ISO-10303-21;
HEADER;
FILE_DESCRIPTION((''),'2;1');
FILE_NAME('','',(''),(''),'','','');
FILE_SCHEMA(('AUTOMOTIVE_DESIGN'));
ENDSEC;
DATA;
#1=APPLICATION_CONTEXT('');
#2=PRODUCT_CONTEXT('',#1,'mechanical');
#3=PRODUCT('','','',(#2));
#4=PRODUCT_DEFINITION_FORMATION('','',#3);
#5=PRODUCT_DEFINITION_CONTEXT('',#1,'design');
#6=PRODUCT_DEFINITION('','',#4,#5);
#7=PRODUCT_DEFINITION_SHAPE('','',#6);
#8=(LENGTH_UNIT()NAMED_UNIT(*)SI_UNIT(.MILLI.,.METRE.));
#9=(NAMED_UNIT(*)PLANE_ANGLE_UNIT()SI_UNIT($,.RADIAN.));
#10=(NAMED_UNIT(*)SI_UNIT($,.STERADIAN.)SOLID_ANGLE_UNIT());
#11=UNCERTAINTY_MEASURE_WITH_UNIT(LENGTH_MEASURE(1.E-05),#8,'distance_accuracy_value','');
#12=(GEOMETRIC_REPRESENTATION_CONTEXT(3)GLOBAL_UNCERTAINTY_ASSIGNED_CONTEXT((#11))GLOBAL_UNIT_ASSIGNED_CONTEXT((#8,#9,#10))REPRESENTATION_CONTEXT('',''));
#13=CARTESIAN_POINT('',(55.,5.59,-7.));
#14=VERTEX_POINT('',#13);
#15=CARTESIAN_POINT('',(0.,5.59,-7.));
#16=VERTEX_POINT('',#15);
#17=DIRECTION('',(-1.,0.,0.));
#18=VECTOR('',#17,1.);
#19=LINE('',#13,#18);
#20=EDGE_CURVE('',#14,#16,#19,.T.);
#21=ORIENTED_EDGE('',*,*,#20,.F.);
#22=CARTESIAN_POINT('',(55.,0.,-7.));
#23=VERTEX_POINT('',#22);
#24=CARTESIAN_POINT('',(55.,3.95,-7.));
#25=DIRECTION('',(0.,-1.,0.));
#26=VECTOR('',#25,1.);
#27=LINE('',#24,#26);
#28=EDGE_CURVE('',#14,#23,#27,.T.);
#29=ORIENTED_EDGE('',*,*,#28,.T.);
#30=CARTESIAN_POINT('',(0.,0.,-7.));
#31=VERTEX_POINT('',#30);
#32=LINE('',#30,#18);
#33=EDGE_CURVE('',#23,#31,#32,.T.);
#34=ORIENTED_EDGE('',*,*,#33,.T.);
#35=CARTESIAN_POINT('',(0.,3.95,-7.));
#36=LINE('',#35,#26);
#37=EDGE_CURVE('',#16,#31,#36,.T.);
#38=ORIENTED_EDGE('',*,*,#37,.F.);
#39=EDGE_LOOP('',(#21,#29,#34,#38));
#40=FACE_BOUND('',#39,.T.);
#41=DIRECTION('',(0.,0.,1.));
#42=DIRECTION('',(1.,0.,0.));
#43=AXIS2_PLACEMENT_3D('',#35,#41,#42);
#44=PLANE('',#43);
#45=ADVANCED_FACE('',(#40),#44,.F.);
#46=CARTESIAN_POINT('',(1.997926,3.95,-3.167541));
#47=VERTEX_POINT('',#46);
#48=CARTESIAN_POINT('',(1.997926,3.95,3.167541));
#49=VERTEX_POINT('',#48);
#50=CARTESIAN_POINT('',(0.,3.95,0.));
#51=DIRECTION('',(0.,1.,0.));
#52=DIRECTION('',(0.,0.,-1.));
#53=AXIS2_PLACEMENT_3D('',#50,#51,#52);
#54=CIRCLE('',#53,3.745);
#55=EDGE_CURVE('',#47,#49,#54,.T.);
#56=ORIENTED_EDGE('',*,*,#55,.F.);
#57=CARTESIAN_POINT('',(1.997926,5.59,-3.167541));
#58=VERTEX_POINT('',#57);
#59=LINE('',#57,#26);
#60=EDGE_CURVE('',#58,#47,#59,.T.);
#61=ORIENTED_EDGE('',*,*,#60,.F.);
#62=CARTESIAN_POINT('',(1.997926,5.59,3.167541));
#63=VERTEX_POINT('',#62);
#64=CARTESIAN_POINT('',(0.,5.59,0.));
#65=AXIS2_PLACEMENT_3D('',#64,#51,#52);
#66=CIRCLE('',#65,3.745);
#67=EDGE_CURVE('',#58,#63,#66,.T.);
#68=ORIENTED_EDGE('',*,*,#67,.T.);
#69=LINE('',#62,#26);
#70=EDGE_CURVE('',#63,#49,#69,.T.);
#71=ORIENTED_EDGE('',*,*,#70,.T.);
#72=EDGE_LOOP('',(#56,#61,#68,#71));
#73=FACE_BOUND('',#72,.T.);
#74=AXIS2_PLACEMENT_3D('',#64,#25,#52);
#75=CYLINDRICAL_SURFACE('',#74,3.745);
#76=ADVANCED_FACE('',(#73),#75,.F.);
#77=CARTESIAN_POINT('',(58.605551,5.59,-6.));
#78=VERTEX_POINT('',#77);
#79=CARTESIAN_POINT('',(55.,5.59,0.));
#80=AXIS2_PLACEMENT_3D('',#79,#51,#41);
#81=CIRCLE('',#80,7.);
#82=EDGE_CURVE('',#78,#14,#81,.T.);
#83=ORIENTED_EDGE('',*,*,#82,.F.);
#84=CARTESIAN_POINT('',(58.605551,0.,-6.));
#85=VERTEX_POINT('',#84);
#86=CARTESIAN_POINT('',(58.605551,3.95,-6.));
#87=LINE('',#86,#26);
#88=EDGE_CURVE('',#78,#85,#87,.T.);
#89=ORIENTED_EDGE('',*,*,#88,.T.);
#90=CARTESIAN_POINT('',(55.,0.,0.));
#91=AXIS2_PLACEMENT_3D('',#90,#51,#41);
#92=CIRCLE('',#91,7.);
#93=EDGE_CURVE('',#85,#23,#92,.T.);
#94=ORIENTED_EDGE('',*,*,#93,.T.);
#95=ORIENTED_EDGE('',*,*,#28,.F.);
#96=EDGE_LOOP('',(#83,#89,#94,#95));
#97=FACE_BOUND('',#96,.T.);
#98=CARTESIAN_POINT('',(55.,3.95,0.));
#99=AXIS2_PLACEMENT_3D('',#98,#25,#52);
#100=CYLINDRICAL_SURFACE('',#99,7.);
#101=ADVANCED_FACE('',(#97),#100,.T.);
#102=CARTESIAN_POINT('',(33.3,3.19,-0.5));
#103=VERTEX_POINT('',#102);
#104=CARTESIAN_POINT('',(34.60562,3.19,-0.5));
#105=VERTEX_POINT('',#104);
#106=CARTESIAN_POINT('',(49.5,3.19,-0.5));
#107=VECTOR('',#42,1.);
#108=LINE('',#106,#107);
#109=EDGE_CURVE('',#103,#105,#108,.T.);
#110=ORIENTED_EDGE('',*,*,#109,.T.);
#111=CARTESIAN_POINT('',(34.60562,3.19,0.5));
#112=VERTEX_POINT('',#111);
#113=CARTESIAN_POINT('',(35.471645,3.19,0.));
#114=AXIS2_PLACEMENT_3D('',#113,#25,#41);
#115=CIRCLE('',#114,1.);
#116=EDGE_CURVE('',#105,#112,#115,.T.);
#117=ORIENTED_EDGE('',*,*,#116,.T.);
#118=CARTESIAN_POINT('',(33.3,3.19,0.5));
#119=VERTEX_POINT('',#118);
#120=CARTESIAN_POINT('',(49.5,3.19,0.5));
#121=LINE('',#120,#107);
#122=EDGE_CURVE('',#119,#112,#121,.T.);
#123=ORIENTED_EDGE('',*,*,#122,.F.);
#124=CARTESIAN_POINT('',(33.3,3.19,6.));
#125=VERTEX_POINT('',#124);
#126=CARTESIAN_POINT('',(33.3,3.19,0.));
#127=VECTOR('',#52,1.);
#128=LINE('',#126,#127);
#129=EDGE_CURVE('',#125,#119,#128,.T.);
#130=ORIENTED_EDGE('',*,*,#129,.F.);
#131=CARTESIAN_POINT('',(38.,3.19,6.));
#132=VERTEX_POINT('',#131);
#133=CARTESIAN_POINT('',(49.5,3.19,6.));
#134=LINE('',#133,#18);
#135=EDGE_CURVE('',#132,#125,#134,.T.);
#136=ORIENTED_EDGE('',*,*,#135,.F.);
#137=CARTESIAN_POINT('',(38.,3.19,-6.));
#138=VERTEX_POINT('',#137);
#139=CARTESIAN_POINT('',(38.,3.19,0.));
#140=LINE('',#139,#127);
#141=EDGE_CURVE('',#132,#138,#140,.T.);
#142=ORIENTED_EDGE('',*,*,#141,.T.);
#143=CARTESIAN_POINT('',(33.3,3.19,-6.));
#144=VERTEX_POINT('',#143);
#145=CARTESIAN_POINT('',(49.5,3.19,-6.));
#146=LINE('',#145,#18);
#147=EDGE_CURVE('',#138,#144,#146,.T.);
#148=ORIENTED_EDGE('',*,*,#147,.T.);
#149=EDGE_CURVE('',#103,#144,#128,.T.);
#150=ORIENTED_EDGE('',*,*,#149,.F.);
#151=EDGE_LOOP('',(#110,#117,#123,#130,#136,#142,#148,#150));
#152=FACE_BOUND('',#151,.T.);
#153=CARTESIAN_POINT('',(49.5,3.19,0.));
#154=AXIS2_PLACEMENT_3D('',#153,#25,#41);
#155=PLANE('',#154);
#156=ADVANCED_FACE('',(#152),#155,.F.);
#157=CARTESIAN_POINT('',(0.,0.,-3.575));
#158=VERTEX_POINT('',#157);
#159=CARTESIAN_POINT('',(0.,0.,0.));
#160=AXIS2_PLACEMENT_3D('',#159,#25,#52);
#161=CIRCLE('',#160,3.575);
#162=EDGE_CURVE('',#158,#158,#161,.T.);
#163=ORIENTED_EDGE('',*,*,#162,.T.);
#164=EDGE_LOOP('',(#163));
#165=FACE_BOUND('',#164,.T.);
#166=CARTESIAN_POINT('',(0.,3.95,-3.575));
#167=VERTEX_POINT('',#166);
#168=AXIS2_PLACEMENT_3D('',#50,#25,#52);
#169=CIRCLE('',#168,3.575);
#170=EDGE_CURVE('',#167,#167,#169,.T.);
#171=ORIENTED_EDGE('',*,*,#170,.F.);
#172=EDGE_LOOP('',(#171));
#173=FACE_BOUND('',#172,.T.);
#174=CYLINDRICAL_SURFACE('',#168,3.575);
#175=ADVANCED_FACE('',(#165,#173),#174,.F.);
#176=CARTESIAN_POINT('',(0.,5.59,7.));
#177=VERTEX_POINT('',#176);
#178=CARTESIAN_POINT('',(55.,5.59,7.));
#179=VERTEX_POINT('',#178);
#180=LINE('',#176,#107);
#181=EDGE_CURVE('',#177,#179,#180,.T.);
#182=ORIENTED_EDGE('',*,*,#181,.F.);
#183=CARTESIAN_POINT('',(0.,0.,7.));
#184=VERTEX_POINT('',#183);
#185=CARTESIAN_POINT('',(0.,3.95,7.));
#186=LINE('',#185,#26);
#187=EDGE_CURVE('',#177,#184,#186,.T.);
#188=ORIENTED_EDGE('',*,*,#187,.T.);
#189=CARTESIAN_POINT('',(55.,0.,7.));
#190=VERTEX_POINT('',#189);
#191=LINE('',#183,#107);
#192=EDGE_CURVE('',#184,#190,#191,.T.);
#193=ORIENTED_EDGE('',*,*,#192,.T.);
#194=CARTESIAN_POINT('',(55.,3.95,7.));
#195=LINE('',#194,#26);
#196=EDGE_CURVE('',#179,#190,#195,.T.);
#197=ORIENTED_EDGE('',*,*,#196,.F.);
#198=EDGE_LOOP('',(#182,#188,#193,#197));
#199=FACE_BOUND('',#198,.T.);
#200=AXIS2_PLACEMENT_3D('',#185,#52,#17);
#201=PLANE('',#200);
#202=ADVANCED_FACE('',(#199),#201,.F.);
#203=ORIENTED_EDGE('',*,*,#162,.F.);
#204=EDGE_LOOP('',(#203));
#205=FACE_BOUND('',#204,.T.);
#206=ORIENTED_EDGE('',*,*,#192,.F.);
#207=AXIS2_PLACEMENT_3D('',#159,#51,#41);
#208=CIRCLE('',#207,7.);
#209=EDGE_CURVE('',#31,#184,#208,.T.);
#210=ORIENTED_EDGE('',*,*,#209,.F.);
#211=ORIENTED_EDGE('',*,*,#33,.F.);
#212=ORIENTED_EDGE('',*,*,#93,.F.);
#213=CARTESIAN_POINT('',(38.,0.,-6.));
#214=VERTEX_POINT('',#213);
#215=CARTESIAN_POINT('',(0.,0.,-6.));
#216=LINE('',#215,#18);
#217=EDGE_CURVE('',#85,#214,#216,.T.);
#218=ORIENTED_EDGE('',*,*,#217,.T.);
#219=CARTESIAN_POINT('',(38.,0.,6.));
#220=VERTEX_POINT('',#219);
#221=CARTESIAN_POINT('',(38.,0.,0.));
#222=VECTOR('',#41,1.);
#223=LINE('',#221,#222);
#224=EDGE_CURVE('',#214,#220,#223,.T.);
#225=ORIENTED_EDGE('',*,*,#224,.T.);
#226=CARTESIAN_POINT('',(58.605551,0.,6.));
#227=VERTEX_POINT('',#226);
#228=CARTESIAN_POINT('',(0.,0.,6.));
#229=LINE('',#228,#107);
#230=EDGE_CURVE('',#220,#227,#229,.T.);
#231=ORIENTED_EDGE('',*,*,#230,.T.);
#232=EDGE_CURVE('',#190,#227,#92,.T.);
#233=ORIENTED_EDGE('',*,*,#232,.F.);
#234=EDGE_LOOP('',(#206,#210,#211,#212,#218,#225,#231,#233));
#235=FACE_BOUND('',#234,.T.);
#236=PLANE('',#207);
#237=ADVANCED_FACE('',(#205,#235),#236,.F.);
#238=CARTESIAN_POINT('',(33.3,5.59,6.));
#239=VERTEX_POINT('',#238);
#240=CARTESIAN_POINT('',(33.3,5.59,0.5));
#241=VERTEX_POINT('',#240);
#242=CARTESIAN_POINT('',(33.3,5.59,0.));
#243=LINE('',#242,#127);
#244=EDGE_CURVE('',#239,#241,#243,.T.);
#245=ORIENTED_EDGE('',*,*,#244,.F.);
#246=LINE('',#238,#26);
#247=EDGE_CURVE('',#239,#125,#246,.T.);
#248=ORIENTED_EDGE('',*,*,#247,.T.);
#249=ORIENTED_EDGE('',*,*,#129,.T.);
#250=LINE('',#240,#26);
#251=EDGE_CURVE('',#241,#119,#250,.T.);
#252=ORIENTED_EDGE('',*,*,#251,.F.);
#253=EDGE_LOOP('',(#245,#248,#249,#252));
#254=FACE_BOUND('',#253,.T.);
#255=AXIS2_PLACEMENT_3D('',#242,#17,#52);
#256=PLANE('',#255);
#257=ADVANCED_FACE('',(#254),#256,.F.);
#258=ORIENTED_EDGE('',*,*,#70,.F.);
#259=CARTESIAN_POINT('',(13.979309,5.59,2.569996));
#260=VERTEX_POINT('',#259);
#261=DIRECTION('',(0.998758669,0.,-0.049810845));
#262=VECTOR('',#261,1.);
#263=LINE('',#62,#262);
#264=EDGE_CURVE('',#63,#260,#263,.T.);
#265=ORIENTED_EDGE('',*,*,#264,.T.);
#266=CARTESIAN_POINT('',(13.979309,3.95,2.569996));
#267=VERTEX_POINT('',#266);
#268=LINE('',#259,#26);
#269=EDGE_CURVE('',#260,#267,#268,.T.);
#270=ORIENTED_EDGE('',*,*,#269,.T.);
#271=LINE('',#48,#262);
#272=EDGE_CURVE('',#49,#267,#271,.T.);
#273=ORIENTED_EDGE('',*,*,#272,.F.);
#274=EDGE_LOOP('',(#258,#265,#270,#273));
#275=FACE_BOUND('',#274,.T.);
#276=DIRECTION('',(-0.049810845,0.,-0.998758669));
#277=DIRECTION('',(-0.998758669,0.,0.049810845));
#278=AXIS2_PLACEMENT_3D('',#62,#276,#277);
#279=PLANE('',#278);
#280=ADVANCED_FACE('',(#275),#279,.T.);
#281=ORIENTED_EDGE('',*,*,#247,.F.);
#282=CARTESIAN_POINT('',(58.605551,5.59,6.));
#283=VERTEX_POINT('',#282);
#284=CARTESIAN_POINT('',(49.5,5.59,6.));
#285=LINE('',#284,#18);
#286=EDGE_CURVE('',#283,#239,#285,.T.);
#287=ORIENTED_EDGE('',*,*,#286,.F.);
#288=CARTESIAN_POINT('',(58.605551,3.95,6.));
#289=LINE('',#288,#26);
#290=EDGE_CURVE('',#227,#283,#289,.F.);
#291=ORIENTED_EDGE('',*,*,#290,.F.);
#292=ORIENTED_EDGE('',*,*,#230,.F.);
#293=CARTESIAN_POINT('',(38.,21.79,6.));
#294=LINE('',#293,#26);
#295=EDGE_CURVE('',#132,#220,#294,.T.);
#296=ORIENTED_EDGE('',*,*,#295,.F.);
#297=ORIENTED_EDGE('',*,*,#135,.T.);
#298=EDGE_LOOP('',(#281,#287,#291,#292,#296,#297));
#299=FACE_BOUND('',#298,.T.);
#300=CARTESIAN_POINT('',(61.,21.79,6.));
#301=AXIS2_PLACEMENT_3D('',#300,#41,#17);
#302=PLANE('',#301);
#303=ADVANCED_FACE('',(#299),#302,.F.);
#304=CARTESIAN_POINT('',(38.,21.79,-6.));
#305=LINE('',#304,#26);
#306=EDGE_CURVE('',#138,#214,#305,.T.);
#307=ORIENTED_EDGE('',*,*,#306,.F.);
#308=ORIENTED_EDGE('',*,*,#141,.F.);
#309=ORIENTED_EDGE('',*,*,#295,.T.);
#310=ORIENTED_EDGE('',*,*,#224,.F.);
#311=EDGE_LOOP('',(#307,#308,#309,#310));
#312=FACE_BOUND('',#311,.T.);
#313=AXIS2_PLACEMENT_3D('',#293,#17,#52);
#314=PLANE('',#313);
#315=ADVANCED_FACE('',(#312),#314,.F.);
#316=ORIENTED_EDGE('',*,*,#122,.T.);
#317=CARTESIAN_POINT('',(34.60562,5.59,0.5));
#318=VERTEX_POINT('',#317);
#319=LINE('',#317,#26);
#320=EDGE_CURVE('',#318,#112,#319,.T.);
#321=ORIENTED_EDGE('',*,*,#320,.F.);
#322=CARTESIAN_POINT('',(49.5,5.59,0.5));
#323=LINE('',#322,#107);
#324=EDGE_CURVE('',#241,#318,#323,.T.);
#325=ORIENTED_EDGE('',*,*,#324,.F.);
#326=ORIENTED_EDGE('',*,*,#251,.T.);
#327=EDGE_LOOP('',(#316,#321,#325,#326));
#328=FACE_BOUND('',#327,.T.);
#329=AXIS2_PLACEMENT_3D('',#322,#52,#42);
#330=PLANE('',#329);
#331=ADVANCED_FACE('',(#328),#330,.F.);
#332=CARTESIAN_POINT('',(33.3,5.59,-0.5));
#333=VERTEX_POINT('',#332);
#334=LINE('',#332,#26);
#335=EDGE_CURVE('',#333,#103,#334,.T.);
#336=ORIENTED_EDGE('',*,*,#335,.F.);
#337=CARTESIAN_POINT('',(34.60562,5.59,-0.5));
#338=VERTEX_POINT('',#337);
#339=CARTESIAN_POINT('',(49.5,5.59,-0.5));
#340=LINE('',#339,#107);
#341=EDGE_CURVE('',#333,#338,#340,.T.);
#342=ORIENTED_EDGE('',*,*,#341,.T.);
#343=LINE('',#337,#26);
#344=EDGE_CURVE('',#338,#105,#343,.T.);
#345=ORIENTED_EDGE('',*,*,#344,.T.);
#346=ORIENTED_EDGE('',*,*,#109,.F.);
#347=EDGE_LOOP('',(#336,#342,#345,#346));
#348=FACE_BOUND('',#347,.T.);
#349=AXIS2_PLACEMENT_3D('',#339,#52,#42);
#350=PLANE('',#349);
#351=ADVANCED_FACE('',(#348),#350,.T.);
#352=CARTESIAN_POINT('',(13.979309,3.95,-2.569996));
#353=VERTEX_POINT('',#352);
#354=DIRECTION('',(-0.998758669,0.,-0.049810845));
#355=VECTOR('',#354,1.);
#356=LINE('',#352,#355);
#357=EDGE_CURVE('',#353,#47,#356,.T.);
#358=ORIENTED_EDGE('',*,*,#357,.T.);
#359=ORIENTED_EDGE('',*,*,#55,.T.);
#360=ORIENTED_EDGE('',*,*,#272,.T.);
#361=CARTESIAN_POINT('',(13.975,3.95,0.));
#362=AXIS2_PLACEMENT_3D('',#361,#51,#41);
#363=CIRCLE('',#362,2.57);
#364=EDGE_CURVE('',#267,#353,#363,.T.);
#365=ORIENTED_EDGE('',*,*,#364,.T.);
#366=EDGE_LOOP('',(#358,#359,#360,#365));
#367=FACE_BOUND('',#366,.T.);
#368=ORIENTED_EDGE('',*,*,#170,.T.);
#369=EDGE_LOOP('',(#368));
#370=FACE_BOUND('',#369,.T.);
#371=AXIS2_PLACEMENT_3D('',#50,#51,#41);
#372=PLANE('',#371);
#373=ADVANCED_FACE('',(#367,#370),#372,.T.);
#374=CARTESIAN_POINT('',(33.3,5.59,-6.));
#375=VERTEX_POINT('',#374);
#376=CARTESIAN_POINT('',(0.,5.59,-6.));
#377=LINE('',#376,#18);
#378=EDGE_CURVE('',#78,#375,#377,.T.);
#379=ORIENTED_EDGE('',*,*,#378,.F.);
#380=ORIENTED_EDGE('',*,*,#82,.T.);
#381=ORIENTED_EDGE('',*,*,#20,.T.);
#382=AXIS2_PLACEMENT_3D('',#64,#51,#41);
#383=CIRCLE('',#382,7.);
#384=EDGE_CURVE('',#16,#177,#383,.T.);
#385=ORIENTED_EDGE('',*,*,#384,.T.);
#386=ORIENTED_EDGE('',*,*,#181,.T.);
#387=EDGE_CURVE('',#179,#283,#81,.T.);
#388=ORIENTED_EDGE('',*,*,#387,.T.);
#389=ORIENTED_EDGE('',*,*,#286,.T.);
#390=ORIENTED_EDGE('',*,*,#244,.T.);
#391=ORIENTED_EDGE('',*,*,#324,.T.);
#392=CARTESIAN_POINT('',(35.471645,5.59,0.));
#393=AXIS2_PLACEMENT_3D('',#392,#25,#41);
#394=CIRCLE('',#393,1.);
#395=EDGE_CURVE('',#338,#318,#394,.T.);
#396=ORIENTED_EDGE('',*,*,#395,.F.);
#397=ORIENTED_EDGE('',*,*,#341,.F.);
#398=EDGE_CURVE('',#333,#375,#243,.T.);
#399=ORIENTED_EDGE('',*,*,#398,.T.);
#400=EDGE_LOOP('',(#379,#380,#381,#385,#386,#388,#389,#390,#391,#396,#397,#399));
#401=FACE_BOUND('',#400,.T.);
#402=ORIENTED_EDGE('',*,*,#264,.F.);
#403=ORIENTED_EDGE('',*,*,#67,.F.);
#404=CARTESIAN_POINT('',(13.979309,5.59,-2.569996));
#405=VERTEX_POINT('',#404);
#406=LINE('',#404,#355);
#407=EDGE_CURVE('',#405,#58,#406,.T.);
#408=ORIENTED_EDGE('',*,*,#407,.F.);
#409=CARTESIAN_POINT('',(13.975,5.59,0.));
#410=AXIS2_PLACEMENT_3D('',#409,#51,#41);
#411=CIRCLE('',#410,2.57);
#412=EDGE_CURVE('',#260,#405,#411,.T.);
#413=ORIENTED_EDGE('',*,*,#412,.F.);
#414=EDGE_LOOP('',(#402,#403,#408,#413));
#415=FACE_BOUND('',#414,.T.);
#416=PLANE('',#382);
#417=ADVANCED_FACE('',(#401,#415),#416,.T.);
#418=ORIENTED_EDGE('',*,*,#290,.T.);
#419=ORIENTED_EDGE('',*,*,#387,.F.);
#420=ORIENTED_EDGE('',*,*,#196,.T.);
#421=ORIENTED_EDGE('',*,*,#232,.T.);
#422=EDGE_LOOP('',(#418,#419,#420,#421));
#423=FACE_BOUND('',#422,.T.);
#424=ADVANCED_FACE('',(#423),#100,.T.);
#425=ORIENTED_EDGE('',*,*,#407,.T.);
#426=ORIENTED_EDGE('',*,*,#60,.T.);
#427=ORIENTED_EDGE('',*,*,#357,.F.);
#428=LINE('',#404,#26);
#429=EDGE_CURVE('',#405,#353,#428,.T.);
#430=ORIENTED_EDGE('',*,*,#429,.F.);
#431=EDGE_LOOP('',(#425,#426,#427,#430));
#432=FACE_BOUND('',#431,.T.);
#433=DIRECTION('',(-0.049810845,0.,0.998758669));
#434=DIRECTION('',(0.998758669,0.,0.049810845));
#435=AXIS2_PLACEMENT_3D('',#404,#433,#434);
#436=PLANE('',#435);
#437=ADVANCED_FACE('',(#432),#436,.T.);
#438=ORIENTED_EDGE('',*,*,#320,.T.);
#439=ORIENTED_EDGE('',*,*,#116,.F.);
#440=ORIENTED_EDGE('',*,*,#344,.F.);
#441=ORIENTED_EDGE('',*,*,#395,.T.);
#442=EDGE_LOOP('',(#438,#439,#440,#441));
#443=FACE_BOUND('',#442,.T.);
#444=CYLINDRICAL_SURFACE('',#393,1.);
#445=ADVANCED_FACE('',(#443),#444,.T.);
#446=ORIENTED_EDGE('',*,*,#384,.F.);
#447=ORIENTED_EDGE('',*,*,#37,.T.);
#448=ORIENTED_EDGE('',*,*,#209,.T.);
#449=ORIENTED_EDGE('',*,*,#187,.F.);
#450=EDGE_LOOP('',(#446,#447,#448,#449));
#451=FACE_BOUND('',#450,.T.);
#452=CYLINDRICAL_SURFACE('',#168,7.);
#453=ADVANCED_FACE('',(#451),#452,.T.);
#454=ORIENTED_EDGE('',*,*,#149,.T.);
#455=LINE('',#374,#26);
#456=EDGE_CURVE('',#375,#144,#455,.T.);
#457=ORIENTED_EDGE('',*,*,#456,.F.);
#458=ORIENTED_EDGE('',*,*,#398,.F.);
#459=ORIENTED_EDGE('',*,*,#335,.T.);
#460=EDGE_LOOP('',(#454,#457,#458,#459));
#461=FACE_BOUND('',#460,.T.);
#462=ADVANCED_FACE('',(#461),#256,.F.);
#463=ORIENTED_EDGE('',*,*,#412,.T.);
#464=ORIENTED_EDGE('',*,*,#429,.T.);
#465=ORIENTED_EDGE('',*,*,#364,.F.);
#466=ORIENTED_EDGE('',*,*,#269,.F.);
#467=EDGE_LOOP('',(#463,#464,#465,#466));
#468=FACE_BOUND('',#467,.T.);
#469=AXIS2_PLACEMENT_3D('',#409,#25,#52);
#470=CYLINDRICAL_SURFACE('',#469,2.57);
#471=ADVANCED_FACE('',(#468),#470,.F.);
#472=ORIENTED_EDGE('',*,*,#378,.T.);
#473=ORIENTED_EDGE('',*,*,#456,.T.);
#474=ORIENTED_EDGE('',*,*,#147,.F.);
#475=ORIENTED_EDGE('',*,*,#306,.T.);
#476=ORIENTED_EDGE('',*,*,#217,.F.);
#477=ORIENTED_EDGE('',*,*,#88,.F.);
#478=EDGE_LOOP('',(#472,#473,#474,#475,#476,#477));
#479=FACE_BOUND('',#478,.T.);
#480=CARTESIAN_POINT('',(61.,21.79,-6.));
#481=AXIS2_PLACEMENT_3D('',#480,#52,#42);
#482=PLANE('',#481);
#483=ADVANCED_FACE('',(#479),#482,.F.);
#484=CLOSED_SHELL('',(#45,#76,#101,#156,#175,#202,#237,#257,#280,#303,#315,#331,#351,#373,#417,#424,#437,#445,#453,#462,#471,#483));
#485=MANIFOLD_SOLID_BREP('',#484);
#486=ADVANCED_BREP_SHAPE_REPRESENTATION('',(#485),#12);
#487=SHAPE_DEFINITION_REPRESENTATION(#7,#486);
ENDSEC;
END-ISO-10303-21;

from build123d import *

# Parameters (mm, degrees)
BOSS_EXTRUDE1_DEPTH = 3.95
SKETCH2_R           = 3.575
CUT_EXTRUDE1_DEPTH  = 3.95
BOSS_EXTRUDE2_DEPTH = 1.64
SKETCH4_R           = 3.25
CUT_EXTRUDE2_DEPTH  = 63.643819328
CAVITY1_OUTLINE_R   = 3.25
CAVITY1_DEPTH       = 5.59
CAVITY1_START       = 3.19
CAVITY1_2_DEPTH     = 2.4
CUT_EXTRUDE4_DEPTH  = 63.643819328


# Read off the part's stored shape, not the designer's step: Cavity1
with BuildPart() as part:
    # Sketch1 → Boss-Extrude1 (new body)
    with BuildSketch(Plane(origin=(0, 0, 0), x_dir=(1, 0, 0), z_dir=(0, 1, 0))):
        with BuildLine():
            Line((0, 7), (55, 7))
            ThreePointArc((55, 7), (62, 0), (55, -7))
            Line((55, -7), (0, -7))
            ThreePointArc((0, -7), (-7, 0), (0, 7))
        make_face()
    extrude(amount=BOSS_EXTRUDE1_DEPTH)

    # Sketch2 → Cut-Extrude1 (cut)
    with BuildSketch(Plane.XZ):
        with Locations(Location((0, 0, 0), (0, 0, 270))):
            Circle(SKETCH2_R)
    extrude(amount=-CUT_EXTRUDE1_DEPTH, mode=Mode.SUBTRACT)

    # Sketch3 → Boss-Extrude2 (add)
    with BuildSketch(Plane(origin=(0, 3.95, 0), x_dir=(1, 0, 0), z_dir=(0, 1, 0))):
        with BuildLine():
            Line((0, -7), (55, -7))
            ThreePointArc((55, -7), (62, 0), (55, 7))
            Line((55, 7), (0, 7))
            ThreePointArc((0, 7), (-7, 0), (0, -7))
        make_face()
        with BuildLine():
            Line((13.979308982, 2.569996388), (1.997926282, 3.167540934))
            ThreePointArc((1.997926282, 3.167540934), (-3.745, 0), (1.997926282, -3.167540934))
            Line((1.997926282, -3.167540934), (13.979308982, -2.569996388))
            ThreePointArc((13.979308982, -2.569996388), (16.545, 0), (13.979308982, 2.569996388))
        make_face(mode=Mode.SUBTRACT)
    extrude(amount=BOSS_EXTRUDE2_DEPTH)

    # Sketch4 → Cut-Extrude2 (cut, through all)
    with BuildSketch(Plane(origin=(0, 5.59, 0), x_dir=(1, 0, 0), z_dir=(0, 1, 0))):
        with Locations(Location((55, 0, 0), (0, 0, 270))):
            Circle(SKETCH4_R)
    extrude(amount=-CUT_EXTRUDE2_DEPTH, mode=Mode.SUBTRACT)

    # Cavity1 outline → Cavity1 (cut)
    with BuildSketch(Plane(origin=(0, 0, 0), x_dir=(1, 0, 0), z_dir=(0, 1, 0))):
        with BuildLine():
            Line((58.605551275, 6), (38, 6))
            Line((38, 6), (38, -6))
            Line((38, -6), (58.605551275, -6))
            ThreePointArc((58.605551275, -6), (59.949747468, -4.949747468), (61, -3.605551275))
            Line((61, -3.605551275), (61, 3.605551275))
            ThreePointArc((61, 3.605551275), (59.949747468, 4.949747468), (58.605551275, 6))
        make_face()
        with Locations((55, 0)):
            Circle(CAVITY1_OUTLINE_R, mode=Mode.SUBTRACT)
    extrude(amount=CAVITY1_DEPTH, mode=Mode.SUBTRACT)

    # Cavity1 2 outline → Cavity1 2 (cut)
    with BuildSketch(Plane(origin=(0, 0, 0), x_dir=(1, 0, 0), z_dir=(0, 1, 0)).offset(CAVITY1_START)):
        with BuildLine():
            Line((33.3, 0.5), (34.605619966, 0.5))
            ThreePointArc((34.605619966, 0.5), (36.47164537, 0), (34.605619966, -0.5))
            Line((34.605619966, -0.5), (33.3, -0.5))
            Line((33.3, -0.5), (33.3, -6))
            Line((33.3, -6), (38, -6))
            Line((38, -6), (38, 6))
            Line((38, 6), (33.3, 6))
            Line((33.3, 6), (33.3, 0.5))
        make_face()
        with BuildLine():
            ThreePointArc((61, -3.605551275), (62, 0), (61, 3.605551275))
            Line((61, 3.605551275), (61, -3.605551275))
        make_face()
    extrude(amount=CAVITY1_2_DEPTH, mode=Mode.SUBTRACT)

    # Sketch5 → Cut-Extrude4 (cut, through all)
    with BuildSketch(Plane.XZ):
        with BuildLine():
            Line((61, 3.605551275), (61, -3.605551275))
            ThreePointArc((61, -3.605551275), (62, 0), (61, 3.605551275))
        make_face()
    extrude(amount=-CUT_EXTRUDE4_DEPTH, mode=Mode.SUBTRACT)


solid = part.part
